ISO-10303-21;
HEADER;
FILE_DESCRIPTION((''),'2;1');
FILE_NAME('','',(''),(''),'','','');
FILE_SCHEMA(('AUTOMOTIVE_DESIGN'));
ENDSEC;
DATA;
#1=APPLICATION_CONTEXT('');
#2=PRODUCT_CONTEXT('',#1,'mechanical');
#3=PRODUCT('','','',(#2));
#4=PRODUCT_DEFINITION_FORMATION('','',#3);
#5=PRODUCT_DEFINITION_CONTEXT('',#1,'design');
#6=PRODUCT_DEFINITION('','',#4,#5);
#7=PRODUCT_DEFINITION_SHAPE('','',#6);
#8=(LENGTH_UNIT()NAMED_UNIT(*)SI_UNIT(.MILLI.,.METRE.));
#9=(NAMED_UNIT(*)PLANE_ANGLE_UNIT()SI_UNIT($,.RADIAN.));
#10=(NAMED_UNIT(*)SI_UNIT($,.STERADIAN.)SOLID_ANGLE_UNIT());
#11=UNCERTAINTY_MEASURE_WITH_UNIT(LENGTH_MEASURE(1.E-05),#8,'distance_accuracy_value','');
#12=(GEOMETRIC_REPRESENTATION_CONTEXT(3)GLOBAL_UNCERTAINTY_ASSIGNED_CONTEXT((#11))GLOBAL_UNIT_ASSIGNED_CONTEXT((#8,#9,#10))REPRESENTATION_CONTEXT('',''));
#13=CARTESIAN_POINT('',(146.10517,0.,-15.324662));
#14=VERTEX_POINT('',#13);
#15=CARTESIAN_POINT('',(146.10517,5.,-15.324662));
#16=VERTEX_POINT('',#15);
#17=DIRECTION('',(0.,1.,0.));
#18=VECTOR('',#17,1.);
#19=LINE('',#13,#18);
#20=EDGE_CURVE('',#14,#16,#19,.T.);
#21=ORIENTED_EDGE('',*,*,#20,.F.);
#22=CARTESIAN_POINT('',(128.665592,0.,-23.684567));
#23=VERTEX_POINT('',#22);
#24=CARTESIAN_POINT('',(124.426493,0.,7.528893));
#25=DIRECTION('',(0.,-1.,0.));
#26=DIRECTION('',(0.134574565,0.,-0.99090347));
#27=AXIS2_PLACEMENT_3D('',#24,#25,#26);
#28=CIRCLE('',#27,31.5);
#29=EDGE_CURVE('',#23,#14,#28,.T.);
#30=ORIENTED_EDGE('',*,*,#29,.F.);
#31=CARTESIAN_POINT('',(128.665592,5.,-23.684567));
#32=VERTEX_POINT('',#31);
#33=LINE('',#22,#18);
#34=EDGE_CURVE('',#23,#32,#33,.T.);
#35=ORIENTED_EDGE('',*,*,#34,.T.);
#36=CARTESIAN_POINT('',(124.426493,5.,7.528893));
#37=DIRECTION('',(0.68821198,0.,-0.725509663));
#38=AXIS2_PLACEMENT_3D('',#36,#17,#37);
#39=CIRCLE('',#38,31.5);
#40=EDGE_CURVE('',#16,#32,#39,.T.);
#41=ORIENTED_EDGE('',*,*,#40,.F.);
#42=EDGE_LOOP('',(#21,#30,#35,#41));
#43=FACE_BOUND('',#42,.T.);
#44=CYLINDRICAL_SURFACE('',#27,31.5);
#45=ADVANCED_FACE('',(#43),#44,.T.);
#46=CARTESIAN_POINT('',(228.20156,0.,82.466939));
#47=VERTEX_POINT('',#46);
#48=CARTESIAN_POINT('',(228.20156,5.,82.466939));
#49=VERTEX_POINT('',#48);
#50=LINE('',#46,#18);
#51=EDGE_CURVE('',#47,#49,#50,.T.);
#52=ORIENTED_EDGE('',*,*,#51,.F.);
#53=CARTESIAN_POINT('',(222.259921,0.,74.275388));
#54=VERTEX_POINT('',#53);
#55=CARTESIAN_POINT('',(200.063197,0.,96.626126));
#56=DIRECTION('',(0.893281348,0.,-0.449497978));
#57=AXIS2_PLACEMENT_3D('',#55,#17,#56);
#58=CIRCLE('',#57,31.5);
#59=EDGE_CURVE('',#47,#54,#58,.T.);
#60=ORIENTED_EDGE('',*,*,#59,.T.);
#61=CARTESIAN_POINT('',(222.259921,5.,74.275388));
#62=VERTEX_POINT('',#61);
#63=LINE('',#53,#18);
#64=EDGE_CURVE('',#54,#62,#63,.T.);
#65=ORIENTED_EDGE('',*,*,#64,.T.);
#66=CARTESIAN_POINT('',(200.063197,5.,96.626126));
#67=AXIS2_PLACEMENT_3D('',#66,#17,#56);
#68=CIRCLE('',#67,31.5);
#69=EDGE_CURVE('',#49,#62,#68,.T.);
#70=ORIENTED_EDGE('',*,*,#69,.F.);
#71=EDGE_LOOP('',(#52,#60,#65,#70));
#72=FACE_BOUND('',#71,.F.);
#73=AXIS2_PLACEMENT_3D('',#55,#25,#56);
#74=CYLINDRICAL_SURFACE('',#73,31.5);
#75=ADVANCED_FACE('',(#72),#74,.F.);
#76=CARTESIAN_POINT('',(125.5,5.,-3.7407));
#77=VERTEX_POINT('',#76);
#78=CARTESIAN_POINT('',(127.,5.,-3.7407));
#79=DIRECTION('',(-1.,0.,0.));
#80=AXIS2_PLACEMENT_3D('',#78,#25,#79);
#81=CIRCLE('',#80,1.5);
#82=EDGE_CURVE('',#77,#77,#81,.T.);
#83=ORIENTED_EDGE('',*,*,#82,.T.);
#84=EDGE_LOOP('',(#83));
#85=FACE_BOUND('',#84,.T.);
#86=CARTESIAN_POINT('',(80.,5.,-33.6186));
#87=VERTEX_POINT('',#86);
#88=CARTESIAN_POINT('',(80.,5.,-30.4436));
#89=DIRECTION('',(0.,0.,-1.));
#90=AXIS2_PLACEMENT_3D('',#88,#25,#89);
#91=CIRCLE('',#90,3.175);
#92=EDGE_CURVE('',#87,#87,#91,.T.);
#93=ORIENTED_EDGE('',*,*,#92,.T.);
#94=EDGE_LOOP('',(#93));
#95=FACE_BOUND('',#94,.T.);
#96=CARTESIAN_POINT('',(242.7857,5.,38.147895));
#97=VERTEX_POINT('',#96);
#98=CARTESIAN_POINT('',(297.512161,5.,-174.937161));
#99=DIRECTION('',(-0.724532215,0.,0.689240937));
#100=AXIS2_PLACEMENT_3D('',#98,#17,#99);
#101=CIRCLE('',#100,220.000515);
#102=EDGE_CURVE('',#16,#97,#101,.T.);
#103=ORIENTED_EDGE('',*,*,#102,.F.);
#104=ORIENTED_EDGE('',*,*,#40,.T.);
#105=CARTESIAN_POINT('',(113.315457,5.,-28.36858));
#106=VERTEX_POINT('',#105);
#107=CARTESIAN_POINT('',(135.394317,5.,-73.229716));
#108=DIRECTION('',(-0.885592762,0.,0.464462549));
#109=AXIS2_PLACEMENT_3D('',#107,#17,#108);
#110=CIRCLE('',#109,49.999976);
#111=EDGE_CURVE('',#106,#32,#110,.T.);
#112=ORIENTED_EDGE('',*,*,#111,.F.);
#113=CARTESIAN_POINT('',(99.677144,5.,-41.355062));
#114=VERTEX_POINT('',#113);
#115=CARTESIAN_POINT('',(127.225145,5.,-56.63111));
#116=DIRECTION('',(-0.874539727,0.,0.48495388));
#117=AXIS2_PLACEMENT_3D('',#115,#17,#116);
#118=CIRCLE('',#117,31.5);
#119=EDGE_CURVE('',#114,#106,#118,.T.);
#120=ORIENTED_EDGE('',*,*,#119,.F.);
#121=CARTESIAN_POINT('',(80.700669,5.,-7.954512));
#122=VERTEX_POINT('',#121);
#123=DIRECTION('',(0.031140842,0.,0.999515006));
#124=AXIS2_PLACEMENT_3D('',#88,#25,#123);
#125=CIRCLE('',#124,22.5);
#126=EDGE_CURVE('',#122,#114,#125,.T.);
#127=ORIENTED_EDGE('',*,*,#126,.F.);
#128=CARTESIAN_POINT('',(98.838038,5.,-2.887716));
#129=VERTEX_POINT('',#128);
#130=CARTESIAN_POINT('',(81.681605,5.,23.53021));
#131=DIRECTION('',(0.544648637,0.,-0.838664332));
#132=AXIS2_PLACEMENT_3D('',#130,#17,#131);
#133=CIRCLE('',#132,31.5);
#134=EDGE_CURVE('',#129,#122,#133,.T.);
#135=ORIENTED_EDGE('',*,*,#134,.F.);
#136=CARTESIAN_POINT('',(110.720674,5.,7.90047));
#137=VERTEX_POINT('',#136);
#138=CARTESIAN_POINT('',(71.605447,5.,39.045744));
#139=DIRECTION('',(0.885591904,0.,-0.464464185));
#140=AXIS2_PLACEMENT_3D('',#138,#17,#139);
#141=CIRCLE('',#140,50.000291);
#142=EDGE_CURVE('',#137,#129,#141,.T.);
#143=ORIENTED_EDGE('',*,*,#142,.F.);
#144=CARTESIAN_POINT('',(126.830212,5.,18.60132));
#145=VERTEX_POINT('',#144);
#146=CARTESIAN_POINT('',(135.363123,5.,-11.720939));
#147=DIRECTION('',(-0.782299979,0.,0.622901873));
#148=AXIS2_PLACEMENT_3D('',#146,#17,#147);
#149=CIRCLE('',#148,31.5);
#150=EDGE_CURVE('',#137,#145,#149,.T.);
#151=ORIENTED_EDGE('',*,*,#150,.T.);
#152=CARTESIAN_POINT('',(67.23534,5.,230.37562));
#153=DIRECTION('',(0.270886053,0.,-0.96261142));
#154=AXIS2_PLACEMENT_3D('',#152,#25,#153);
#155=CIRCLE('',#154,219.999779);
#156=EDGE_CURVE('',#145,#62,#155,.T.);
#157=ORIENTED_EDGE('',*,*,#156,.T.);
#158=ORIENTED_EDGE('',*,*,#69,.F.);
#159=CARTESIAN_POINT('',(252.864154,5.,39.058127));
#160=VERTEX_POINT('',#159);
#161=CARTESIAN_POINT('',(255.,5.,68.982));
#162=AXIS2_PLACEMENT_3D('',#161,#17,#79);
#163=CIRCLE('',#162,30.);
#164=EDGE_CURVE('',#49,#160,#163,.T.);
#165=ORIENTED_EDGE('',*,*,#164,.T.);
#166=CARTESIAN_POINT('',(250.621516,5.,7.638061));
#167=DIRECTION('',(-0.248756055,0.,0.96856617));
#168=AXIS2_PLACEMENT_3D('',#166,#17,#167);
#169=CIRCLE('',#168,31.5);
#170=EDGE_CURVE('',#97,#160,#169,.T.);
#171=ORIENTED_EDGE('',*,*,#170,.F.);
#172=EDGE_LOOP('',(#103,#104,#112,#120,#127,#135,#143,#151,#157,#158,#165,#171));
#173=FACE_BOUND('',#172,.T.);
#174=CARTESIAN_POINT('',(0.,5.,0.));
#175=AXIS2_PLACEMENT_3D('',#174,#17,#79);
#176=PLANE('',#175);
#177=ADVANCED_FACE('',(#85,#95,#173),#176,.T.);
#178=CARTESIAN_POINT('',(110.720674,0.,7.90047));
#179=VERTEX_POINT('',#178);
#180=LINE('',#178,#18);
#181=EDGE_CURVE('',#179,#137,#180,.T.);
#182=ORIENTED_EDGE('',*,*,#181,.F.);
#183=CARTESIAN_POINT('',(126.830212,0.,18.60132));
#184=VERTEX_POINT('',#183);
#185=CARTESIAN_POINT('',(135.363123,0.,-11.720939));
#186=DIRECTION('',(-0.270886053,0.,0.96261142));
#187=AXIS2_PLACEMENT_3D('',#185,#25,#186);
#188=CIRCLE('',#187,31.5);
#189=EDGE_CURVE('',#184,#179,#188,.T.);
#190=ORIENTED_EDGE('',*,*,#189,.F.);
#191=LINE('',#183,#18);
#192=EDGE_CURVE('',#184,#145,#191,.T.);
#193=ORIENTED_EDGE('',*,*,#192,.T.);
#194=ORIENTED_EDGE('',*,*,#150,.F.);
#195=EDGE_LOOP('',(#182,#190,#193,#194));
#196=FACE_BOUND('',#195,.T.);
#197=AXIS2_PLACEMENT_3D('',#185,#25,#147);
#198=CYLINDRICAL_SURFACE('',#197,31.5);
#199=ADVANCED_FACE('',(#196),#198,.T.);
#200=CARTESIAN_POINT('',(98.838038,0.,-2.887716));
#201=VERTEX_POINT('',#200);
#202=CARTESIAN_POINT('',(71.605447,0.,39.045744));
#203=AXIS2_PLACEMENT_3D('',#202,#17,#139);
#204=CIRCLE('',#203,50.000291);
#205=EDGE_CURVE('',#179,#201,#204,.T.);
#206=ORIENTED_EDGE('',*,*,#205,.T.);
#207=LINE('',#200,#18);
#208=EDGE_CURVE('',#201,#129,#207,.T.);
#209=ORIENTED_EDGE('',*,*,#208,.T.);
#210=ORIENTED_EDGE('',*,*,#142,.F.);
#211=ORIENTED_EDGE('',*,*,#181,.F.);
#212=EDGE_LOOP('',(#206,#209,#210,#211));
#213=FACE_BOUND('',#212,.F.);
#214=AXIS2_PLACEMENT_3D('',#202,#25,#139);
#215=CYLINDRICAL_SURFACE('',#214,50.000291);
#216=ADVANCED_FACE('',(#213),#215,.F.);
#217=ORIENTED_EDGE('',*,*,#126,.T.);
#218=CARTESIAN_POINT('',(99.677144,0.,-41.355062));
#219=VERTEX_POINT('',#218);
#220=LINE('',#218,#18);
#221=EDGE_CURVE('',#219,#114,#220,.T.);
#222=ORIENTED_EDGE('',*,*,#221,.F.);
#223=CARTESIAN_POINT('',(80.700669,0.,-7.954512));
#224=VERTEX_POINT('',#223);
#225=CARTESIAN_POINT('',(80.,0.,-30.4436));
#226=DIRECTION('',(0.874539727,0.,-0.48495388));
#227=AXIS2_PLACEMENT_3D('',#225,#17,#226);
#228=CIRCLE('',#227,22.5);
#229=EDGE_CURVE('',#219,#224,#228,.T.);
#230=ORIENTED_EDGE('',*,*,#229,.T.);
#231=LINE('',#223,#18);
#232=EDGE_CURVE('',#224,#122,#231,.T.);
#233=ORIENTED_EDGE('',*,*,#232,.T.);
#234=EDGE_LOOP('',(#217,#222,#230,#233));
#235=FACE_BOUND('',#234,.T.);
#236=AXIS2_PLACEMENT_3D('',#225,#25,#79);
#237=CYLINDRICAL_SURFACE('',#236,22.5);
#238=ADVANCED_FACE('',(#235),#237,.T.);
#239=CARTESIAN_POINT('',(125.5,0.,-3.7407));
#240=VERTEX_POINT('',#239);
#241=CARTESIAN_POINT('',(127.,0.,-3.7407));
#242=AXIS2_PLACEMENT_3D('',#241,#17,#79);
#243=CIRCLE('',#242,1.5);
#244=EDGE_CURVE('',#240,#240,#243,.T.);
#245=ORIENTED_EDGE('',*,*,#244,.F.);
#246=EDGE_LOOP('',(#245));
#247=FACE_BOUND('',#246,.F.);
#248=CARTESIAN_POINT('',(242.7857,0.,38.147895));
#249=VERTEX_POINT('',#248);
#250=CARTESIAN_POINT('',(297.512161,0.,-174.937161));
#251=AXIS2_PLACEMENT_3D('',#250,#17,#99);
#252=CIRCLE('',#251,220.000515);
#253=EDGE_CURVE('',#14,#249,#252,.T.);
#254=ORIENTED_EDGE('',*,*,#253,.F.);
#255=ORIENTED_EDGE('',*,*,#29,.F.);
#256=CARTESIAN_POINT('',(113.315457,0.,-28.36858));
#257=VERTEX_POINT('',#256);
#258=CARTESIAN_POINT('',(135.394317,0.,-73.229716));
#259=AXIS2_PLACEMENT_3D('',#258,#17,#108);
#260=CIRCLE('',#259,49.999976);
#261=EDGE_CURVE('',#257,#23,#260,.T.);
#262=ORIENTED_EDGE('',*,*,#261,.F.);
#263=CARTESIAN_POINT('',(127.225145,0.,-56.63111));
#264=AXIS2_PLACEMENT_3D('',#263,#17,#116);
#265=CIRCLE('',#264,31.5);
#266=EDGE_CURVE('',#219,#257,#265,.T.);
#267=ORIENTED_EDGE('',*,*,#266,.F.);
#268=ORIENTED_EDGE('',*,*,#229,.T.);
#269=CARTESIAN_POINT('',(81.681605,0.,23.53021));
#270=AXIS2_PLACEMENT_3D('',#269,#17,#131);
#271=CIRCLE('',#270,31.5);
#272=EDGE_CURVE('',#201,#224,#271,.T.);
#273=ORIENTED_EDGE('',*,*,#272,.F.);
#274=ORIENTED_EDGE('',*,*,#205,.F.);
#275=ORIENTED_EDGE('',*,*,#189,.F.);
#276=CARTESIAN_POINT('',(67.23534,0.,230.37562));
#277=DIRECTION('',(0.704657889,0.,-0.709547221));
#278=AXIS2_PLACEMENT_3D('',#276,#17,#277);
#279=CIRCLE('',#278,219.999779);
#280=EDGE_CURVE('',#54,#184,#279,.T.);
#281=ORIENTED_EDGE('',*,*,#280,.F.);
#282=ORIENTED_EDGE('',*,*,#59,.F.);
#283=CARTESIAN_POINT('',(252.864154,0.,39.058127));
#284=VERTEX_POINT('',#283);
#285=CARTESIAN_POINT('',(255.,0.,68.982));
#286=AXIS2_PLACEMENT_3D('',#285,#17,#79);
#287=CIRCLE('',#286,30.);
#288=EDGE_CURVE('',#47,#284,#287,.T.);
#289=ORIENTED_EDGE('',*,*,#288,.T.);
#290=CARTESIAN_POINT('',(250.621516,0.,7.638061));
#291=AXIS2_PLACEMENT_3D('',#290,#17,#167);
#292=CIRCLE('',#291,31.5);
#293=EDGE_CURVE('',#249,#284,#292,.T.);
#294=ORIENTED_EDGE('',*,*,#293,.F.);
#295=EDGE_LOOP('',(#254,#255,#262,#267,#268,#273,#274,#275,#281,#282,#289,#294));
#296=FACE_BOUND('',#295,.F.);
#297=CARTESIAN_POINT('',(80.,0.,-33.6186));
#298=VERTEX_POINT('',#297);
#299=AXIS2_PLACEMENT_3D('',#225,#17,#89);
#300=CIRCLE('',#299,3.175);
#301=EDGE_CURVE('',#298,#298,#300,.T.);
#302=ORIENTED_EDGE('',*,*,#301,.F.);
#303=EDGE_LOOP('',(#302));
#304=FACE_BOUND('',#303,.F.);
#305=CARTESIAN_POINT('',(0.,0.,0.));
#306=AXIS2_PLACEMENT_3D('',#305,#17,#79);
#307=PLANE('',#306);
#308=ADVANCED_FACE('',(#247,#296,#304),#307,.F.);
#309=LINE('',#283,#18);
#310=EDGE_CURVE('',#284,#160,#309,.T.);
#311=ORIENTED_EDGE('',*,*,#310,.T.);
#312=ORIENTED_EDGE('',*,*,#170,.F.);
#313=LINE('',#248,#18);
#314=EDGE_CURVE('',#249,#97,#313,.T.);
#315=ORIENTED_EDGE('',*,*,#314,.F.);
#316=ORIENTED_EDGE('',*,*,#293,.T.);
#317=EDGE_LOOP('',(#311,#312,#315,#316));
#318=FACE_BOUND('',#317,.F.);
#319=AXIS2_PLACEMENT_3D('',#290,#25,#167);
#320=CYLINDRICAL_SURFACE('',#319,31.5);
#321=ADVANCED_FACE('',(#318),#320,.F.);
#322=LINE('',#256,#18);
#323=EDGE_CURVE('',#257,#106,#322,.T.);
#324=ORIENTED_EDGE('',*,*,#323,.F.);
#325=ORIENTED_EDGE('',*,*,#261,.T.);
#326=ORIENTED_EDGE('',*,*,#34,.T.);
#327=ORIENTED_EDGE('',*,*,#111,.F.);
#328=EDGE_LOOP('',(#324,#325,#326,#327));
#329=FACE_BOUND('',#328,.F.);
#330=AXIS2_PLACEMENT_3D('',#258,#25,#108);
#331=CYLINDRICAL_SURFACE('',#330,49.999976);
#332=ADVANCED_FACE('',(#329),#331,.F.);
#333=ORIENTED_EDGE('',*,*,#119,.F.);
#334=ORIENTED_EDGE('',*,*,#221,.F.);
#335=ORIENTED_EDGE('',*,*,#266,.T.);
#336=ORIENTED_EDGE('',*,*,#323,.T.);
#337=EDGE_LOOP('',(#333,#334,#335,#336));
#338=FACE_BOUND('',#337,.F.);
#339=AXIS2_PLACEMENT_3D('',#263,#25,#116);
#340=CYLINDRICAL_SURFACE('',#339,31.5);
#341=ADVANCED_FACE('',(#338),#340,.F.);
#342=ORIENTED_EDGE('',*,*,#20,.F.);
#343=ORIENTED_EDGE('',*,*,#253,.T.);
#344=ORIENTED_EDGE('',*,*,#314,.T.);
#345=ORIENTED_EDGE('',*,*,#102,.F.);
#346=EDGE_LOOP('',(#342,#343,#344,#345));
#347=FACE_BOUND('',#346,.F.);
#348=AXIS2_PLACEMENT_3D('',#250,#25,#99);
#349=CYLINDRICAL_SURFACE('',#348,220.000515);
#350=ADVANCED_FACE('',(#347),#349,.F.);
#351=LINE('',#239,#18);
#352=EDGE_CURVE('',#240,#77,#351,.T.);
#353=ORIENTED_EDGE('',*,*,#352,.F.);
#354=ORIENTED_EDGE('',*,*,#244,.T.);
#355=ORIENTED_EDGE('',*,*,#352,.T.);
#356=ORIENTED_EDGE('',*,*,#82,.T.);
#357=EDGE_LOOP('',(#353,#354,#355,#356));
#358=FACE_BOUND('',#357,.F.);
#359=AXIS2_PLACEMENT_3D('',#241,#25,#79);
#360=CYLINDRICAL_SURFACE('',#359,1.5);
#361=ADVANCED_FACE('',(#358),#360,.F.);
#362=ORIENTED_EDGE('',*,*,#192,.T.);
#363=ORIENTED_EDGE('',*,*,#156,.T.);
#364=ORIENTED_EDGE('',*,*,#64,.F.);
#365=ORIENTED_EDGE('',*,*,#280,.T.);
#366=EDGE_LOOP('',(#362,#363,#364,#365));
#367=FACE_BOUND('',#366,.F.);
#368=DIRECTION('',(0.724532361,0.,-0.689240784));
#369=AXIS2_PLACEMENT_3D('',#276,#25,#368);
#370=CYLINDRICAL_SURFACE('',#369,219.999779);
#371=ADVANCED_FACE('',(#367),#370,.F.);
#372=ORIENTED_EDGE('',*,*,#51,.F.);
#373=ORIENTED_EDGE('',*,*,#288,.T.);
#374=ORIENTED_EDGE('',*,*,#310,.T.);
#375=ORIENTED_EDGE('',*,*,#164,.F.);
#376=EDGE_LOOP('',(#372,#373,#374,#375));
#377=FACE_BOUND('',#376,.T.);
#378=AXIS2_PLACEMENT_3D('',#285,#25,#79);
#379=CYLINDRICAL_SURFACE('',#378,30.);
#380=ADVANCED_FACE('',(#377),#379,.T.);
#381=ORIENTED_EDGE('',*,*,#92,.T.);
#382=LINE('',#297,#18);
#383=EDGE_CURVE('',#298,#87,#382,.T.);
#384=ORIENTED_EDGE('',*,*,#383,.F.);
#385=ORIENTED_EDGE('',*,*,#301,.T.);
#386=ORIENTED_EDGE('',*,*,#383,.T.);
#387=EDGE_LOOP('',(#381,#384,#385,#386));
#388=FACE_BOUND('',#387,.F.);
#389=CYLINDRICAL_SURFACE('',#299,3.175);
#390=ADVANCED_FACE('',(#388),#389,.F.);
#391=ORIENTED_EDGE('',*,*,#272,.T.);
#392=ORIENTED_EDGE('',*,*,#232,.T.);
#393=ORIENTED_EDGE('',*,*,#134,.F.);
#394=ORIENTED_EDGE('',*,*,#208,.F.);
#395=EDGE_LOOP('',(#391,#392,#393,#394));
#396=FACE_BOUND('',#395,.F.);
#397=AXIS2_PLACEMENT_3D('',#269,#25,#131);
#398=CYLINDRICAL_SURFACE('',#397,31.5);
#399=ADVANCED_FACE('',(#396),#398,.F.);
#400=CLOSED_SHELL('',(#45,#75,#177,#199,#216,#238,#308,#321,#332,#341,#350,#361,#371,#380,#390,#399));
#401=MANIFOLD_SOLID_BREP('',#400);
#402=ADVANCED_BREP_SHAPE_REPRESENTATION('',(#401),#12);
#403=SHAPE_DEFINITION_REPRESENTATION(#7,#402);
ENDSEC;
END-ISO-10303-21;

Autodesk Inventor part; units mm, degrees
ref_plane "YZ Plane" through (0, 0, 0) normal (1, 0, 0) x (0, 1, 0)
ref_plane "XZ Plane" through (0, 0, 0) normal (0, 1, 0) x (-1, 0, 0)
ref_plane "XY Plane" through (0, 0, 0) normal (0, 0, 1) x (1, 0, 0)
sketch "Cara" plane through (0, 0, 0) normal (0, 0, 1) x (1, 0, 0)
  line L0 (-22.1935, -24.9393) -> (-15.1747, -17.9205)
  arc A0 (-12.474, -17.8034) -> (-15.1747, -17.9205) centre (-13.7605, -19.3347) ccw
  arc A1 (-12.474, -17.8034) -> (-6.107, -21.4794) centre (1.0981, -1.6477) ccw
  arc A2 (-4.8581, -23.8768) -> (-6.107, -21.4794) centre (-6.79, -23.3592) ccw
  line L1 (-4.8581, -23.8768) -> (-7.4272, -33.4646)
  arc A3 (-9.9928, -34.8439) -> (-7.4272, -33.4646) centre (-9.359, -32.947) ccw
  arc A4 (-22.1052, -27.8509) -> (-9.9928, -34.8439) centre (1.0981, -1.6477) ccw
  arc A5 (-22.1935, -24.9393) -> (-22.1052, -27.8509) centre (-20.7793, -26.3535) ccw
  line L2 (9.6235, -33.4646) -> (7.0544, -23.8768)
  arc A6 (8.3033, -21.4794) -> (7.0544, -23.8768) centre (8.9863, -23.3592) ccw
  arc A7 (8.3033, -21.4794) -> (14.6703, -17.8034) centre (1.0981, -1.6477) ccw
  arc A8 (17.371, -17.9205) -> (14.6703, -17.8034) centre (15.9568, -19.3347) ccw
  line L3 (17.371, -17.9205) -> (24.3898, -24.9393)
  arc A9 (24.3015, -27.8509) -> (24.3898, -24.9393) centre (22.9756, -26.3535) ccw
  arc A10 (12.1891, -34.8439) -> (24.3015, -27.8509) centre (1.0981, -1.6477) ccw
  arc A11 (9.6235, -33.4646) -> (12.1891, -34.8439) centre (11.5553, -32.947) ccw
  line L4 (32.9151, -10.173) -> (23.3272, -7.604)
  arc A12 (21.8755, -5.3237) -> (23.3272, -7.604) centre (23.8449, -5.6721) ccw
  arc A13 (21.8755, -5.3237) -> (21.8755, 2.0283) centre (1.0981, -1.6477) ccw
  arc A14 (23.3272, 4.3086) -> (21.8755, 2.0283) centre (23.8449, 2.3767) ccw
  line L5 (23.3272, 4.3086) -> (32.9151, 6.8776)
  arc A15 (35.3924, 5.3454) -> (32.9151, 6.8776) centre (33.4327, 4.9458) ccw
  arc A16 (35.3924, -8.6408) -> (35.3924, 5.3454) centre (1.0981, -1.6477) ccw
  arc A17 (32.9151, -10.173) -> (35.3924, -8.6408) centre (33.4327, -8.2412) ccw
  line L6 (24.3898, 21.6439) -> (17.371, 14.6251)
  arc A18 (14.6703, 14.508) -> (17.371, 14.6251) centre (15.9568, 16.0394) ccw
  arc A19 (14.6703, 14.508) -> (8.3033, 18.184) centre (1.0981, -1.6477) ccw
  arc A20 (7.0544, 20.5814) -> (8.3033, 18.184) centre (8.9863, 20.0638) ccw
  line L7 (7.0544, 20.5814) -> (9.6235, 30.1693)
  arc A21 (12.1891, 31.5486) -> (9.6235, 30.1693) centre (11.5553, 29.6516) ccw
  arc A22 (24.3015, 24.5555) -> (12.1891, 31.5486) centre (1.0981, -1.6477) ccw
  arc A23 (24.3898, 21.6439) -> (24.3015, 24.5555) centre (22.9756, 23.0582) ccw
  line L8 (-7.4272, 30.1693) -> (-4.8581, 20.5814)
  arc A24 (-6.107, 18.184) -> (-4.8581, 20.5814) centre (-6.79, 20.0638) ccw
  arc A25 (-6.107, 18.184) -> (-12.474, 14.508) centre (1.0981, -1.6477) ccw
  arc A26 (-15.1747, 14.6251) -> (-12.474, 14.508) centre (-13.7605, 16.0394) ccw
  line L9 (-15.1747, 14.6251) -> (-22.1935, 21.6439)
  arc A27 (-22.1052, 24.5555) -> (-22.1935, 21.6439) centre (-20.7793, 23.0582) ccw
  arc A28 (-9.9928, 31.5486) -> (-22.1052, 24.5555) centre (1.0981, -1.6477) ccw
  arc A29 (-7.4272, 30.1693) -> (-9.9928, 31.5486) centre (-9.359, 29.6516) ccw
  line L10 (-30.7188, 6.8776) -> (-21.131, 4.3086)
  arc A30 (-19.6792, 2.0283) -> (-21.131, 4.3086) centre (-21.6486, 2.3767) ccw
  arc A31 (-19.6792, 2.0283) -> (-19.6792, -5.3237) centre (1.0981, -1.6477) ccw
  arc A32 (-21.131, -7.604) -> (-19.6792, -5.3237) centre (-21.6486, -5.6721) ccw
  line L11 (-21.131, -7.604) -> (-30.7188, -10.173)
  arc A33 (-33.1961, -8.6408) -> (-30.7188, -10.173) centre (-31.2365, -8.2412) ccw
  arc A34 (-33.1961, 5.3454) -> (-33.1961, -8.6408) centre (1.0981, -1.6477) ccw
  arc A35 (-30.7188, 6.8776) -> (-33.1961, 5.3454) centre (-31.2365, 4.9458) ccw
  circle A36 centre (-37.4568, -19.3542) radius 1.5875
  circle A37 centre (39.653, 16.0588) radius 1.5875
  circle A38 centre (-16.6083, 36.9072) radius 1.5875
  circle A39 centre (18.8046, -40.2026) radius 1.5875
  circle A40 centre (1.0981, -1.6477) radius 15.5
  arc A41 (13.186, 39.6183) -> (16.9444, 39.4394) centre (15.4349, 47.2957) ccw
  arc A42 (13.186, 39.6183) -> (-10.9897, 39.6183) centre (1.0981, -1.6477) ccw
  arc A43 (-15.0916, 39.5133) -> (-10.9897, 39.6183) centre (-13.2386, 47.2957) ccw
  arc A44 (-15.0916, 39.5133) -> (-19.5734, 37.455) centre (-16.0181, 35.6221) ccw
  arc A45 (-22.3261, 34.412) -> (-19.5734, 37.455) centre (-26.6841, 41.1208) ccw
  arc A46 (-22.3261, 34.412) -> (-34.8255, 21.9848) centre (1.0981, -1.6477) ccw
  arc A47 (-37.5746, 19.4158) -> (-34.8255, 21.9848) centre (-41.5089, 26.3816) ccw
  arc A48 (-39.989, 14.1986) -> (-37.5746, 19.4158) centre (-37.4054, 16.1703) ccw
  arc A49 (-40.1679, 10.4402) -> (-39.989, 14.1986) centre (-47.8453, 12.6891) ccw
  arc A50 (-40.1679, 10.4402) -> (-40.2027, -13.6161) centre (1.0981, -1.6477) ccw
  arc A51 (-40.1338, -17.8165) -> (-40.2027, -13.6161) centre (-47.8865, -15.8428) ccw
  arc A52 (-40.1338, -17.8165) -> (-38.0349, -22.3868) centre (-36.2575, -18.8034) ccw
  arc A53 (-34.8937, -25.1762) -> (-38.0349, -22.3868) centre (-41.5898, -29.5536) ccw
  arc A54 (-34.8937, -25.1762) -> (-22.5344, -37.5713) centre (1.0981, -1.6477) ccw
  arc A55 (-19.9654, -40.3204) -> (-22.5344, -37.5713) centre (-26.9311, -44.2547) ccw
  arc A56 (-14.7481, -42.7348) -> (-19.9654, -40.3204) centre (-16.7198, -40.1512) ccw
  arc A57 (-10.9897, -42.9137) -> (-14.7481, -42.7348) centre (-13.2386, -50.5911) ccw
  arc A58 (-10.9897, -42.9137) -> (13.0666, -42.9485) centre (1.0981, -1.6477) ccw
  arc A59 (17.2235, -42.8687) -> (13.0666, -42.9485) centre (15.2932, -50.6324) ccw
  arc A60 (17.2235, -42.8687) -> (21.7574, -40.7935) centre (18.1887, -38.9869) ccw
  arc A61 (24.5347, -37.6994) -> (21.7574, -40.7935) centre (28.895, -44.4067) ccw
  arc A62 (24.5347, -37.6994) -> (37.0217, -25.2802) centre (1.0981, -1.6477) ccw
  arc A63 (39.7709, -22.7112) -> (37.0217, -25.2802) centre (43.7052, -29.6769) ccw
  arc A64 (42.1093, -17.3982) -> (39.7709, -22.7112) centre (39.6017, -19.4656) ccw
  arc A65 (42.3332, -13.8408) -> (42.1093, -17.3982) centre (50.0048, -16.1093) ccw
  arc A66 (42.3332, -13.8408) -> (42.3989, 10.3207) centre (1.0981, -1.6477) ccw
  arc A67 (42.3301, 14.5211) -> (42.3989, 10.3207) centre (50.0828, 12.5474) ccw
  arc A68 (42.3301, 14.5211) -> (40.2312, 19.0914) centre (38.4538, 15.508) ccw
  arc A69 (37.09, 21.8808) -> (40.2312, 19.0914) centre (43.7861, 26.2582) ccw
  arc A70 (37.09, 21.8808) -> (24.7307, 34.2759) centre (1.0981, -1.6477) ccw
  arc A71 (22.1617, 37.0251) -> (24.7307, 34.2759) centre (29.1274, 40.9594) ccw
  arc A72 (16.9444, 39.4394) -> (22.1617, 37.0251) centre (18.9161, 36.8558) ccw
  arc A73 (-38.8583, 20.9988) -> (-42.0265, 14.1525) centre (-36.2077, 15.616) ccw
  spline S0 degree 3 poles (-40.2504, 14.5992) (-40.3671, 14.8104) (-40.4601, 15.0344) (-40.6458, 15.6766) (-40.6826, 16.1053) (-40.5958, 16.8869) (-40.4968, 17.2357) (-40.1864, 17.8912) (-39.9757, 18.1925) (-39.4148, 18.7612) (-39.0515, 19.0059) (-38.4565, 19.2528) (-38.255, 19.3143) (-38.0493, 19.3558) knots 0 0 0 0 0.118944 0.118944 0.328096 0.328096 0.504735 0.504735 0.683825 0.683825 0.89662 0.89662 1 1 1 1
  line L12 (-38.8583, 20.9988) -> (-38.0493, 19.3558)
  arc A74 (-38.8583, 20.9988) -> (-42.0265, 14.1525) centre (-36.2077, 15.616) ccw
  line L13 (-40.2504, 14.5992) -> (-42.0265, 14.1525)
  line L14 (-38.5582, 21.1573) -> (-37.5746, 19.4158)
  arc A75 (-37.5746, 19.4158) -> (-34.8255, 21.9848) centre (-41.5089, 26.3816) ccw
  line L15 (-36.4963, 23.084) -> (-34.8255, 21.9848)
  arc A76 (-38.5582, 21.1573) -> (-36.4963, 23.084) centre (-41.5089, 26.3816) ccw
  spline S1 degree 3 poles (-38.0493, 19.3558) (-37.9271, 19.3805) (-37.8093, 19.397) (-37.6564, 19.4108) (-37.6155, 19.4137) (-37.5746, 19.4158) knots 0 0 0 0 0.731153 0.731153 1 1 1 1
  line L16 (-38.5582, 21.1573) -> (-37.5746, 19.4158)
  arc A77 (-38.8583, 20.9988) -> (-38.5582, 21.1573) centre (-41.5089, 26.3816) ccw
  line L17 (-38.8583, 20.9988) -> (-38.0493, 19.3558)
  spline S2 degree 3 poles (-39.989, 14.1986) (-40.081, 14.3191) (-40.1695, 14.4526) (-40.2504, 14.5992) knots 0 0 0 0 1 1 1 1
  line L18 (-40.2504, 14.5992) -> (-42.0265, 14.1525)
  arc A78 (-41.953, 13.8212) -> (-42.0265, 14.1525) centre (-47.8453, 12.6891) ccw
  line L19 (-39.989, 14.1986) -> (-41.953, 13.8212)
  line L20 (-39.989, 14.1986) -> (-41.953, 13.8212)
  arc A79 (-42.0872, 11.0024) -> (-41.953, 13.8212) centre (-47.8453, 12.6891) ccw
  line L21 (-42.0872, 11.0024) -> (-40.1679, 10.4402)
  arc A80 (-40.1679, 10.4402) -> (-39.989, 14.1986) centre (-47.8453, 12.6891) ccw
  arc A81 (-42.0872, 11.0024) -> (-42.1236, -14.1728) centre (1.0981, -1.6477) ccw
  line L22 (-36.4963, 23.084) -> (-34.8255, 21.9848)
  arc A82 (-22.3261, 34.412) -> (-34.8255, 21.9848) centre (1.0981, -1.6477) ccw
  line L23 (-23.4156, 36.0892) -> (-22.3261, 34.412)
  arc A83 (-23.4156, 36.0892) -> (-36.4963, 23.084) centre (1.0981, -1.6477) ccw
  line L24 (-23.4156, 36.0892) -> (-22.3261, 34.412)
  arc A84 (-22.3261, 34.412) -> (-19.5734, 37.455) centre (-26.6841, 41.1208) ccw
  line L25 (-21.3511, 38.3714) -> (-19.5734, 37.455)
  arc A85 (-23.4156, 36.0892) -> (-21.3511, 38.3714) centre (-26.6841, 41.1208) ccw
  line L26 (-21.3511, 38.3714) -> (-19.5734, 37.455)
  arc A86 (-15.0916, 39.5133) -> (-19.5734, 37.455) centre (-16.0181, 35.6221) ccw
  line L27 (-14.6284, 41.4589) -> (-15.0916, 39.5133)
  arc A87 (-14.6284, 41.4589) -> (-21.3511, 38.3714) centre (-16.0181, 35.6221) ccw
  line L28 (-14.6284, 41.4589) -> (-15.0916, 39.5133)
  arc A88 (-15.0916, 39.5133) -> (-10.9897, 39.6183) centre (-13.2386, 47.2957) ccw
  line L29 (-11.5519, 41.5377) -> (-10.9897, 39.6183)
  arc A89 (-14.6284, 41.4589) -> (-11.5519, 41.5377) centre (-13.2386, 47.2957) ccw
  line L30 (-11.5519, 41.5377) -> (-10.9897, 39.6183)
  arc A90 (13.186, 39.6183) -> (-10.9897, 39.6183) centre (1.0981, -1.6477) ccw
  line L31 (13.7482, 41.5377) -> (13.186, 39.6183)
  arc A91 (13.7482, 41.5377) -> (-11.5519, 41.5377) centre (1.0981, -1.6477) ccw
  line L32 (16.9444, 39.4394) -> (16.567, 41.4035)
  arc A92 (13.7482, 41.5377) -> (16.567, 41.4035) centre (15.4349, 47.2957) ccw
  line L33 (13.7482, 41.5377) -> (13.186, 39.6183)
  arc A93 (13.186, 39.6183) -> (16.9444, 39.4394) centre (15.4349, 47.2957) ccw
  spline S3 degree 3 poles (16.9444, 39.4394) (17.0649, 39.5314) (17.1985, 39.6199) (17.3451, 39.7009) knots 0 0 0 0 1 1 1 1
  line L34 (17.3451, 39.7009) -> (16.8984, 41.4769)
  arc A94 (16.567, 41.4035) -> (16.8984, 41.4769) centre (15.4349, 47.2957) ccw
  line L35 (16.9444, 39.4394) -> (16.567, 41.4035)
  spline S4 degree 3 poles (17.3451, 39.7009) (17.5563, 39.8175) (17.7803, 39.9105) (18.4224, 40.0962) (18.8512, 40.133) (19.6327, 40.0462) (19.9815, 39.9473) (20.6371, 39.6368) (20.9383, 39.4261) (21.507, 38.8652) (21.7517, 38.502) (21.9986, 37.907) (22.0601, 37.7054) (22.1017, 37.4997) knots 0 0 0 0 0.118944 0.118944 0.328096 0.328096 0.504735 0.504735 0.683825 0.683825 0.89662 0.89662 1 1 1 1
  line L36 (23.7446, 38.3088) -> (22.1017, 37.4997)
  arc A95 (23.7446, 38.3088) -> (16.8984, 41.4769) centre (18.3618, 35.6581) ccw
  line L37 (17.3451, 39.7009) -> (16.8984, 41.4769)
  line L38 (37.09, 21.8808) -> (38.764, 22.9751)
  arc A96 (38.764, 22.9751) -> (25.8298, 35.9468) centre (1.0981, -1.6477) ccw
  line L39 (25.8298, 35.9468) -> (24.7307, 34.2759)
  arc A97 (37.09, 21.8808) -> (24.7307, 34.2759) centre (1.0981, -1.6477) ccw
  line L40 (23.9031, 38.0086) -> (22.1617, 37.0251)
  arc A98 (22.1617, 37.0251) -> (24.7307, 34.2759) centre (29.1274, 40.9594) ccw
  line L41 (25.8298, 35.9468) -> (24.7307, 34.2759)
  arc A99 (23.9031, 38.0086) -> (25.8298, 35.9468) centre (29.1274, 40.9594) ccw
  spline S5 degree 3 poles (22.1017, 37.4997) (22.1264, 37.3775) (22.1428, 37.2598) (22.1566, 37.1069) (22.1595, 37.0659) (22.1617, 37.0251) knots 0 0 0 0 0.731153 0.731153 1 1 1 1
  line L42 (23.9031, 38.0086) -> (22.1617, 37.0251)
  arc A100 (23.7446, 38.3088) -> (23.9031, 38.0086) centre (29.1274, 40.9594) ccw
  line L43 (23.7446, 38.3088) -> (22.1017, 37.4997)
  line L44 (37.09, 21.8808) -> (38.764, 22.9751)
  arc A101 (37.09, 21.8808) -> (40.2312, 19.0914) centre (43.7861, 26.2582) ccw
  line L45 (41.1199, 20.8831) -> (40.2312, 19.0914)
  arc A102 (38.764, 22.9751) -> (41.1199, 20.8831) centre (43.7861, 26.2582) ccw
  line L46 (41.1199, 20.8831) -> (40.2312, 19.0914)
  arc A103 (42.3301, 14.5211) -> (40.2312, 19.0914) centre (38.4538, 15.508) ccw
  line L47 (44.2683, 14.0277) -> (42.3301, 14.5211)
  arc A104 (44.2683, 14.0277) -> (41.1199, 20.8831) centre (38.4538, 15.508) ccw
  line L48 (44.2683, 14.0277) -> (42.3301, 14.5211)
  arc A105 (42.3301, 14.5211) -> (42.3989, 10.3207) centre (50.0828, 12.5474) ccw
  line L49 (44.3199, 10.8774) -> (42.3989, 10.3207)
  arc A106 (44.2683, 14.0277) -> (44.3199, 10.8774) centre (50.0828, 12.5474) ccw
  line L50 (44.3199, 10.8774) -> (42.3989, 10.3207)
  arc A107 (42.3332, -13.8408) -> (42.3989, 10.3207) centre (1.0981, -1.6477) ccw
  line L51 (44.2511, -14.4079) -> (42.3332, -13.8408)
  arc A108 (44.2511, -14.4079) -> (44.3199, 10.8774) centre (1.0981, -1.6477) ccw
  spline S6 degree 3 poles (42.4708, -17.939) (42.66, -18.2947) (42.7816, -18.6826) (42.8764, -19.4825) (42.8492, -19.8873) (42.6667, -20.5952) (42.5369, -20.899) (42.1389, -21.5409) (41.845, -21.8556) (41.1886, -22.3275) (40.8415, -22.494) (40.3834, -22.6216) (40.2925, -22.6427) (40.2009, -22.6599) knots 0 0 0 0 0.198107 0.198107 0.395669 0.395669 0.556952 0.556952 0.766408 0.766408 0.954091 0.954091 1 1 1 1
  line L52 (41.0245, -24.3091) -> (40.2009, -22.6599)
  arc A109 (41.0245, -24.3091) -> (44.1743, -17.5253) centre (38.3438, -18.9413) ccw
  line L53 (42.4708, -17.939) -> (44.1743, -17.5253)
  line L54 (42.1093, -17.3982) -> (44.0832, -17.076)
  arc A110 (44.2511, -14.4079) -> (44.0832, -17.076) centre (50.0048, -16.1093) ccw
  line L55 (44.2511, -14.4079) -> (42.3332, -13.8408)
  arc A111 (42.3332, -13.8408) -> (42.1093, -17.3982) centre (50.0048, -16.1093) ccw
  spline S7 degree 3 poles (42.1093, -17.3982) (42.1251, -17.4173) (42.1406, -17.4367) (42.2692, -17.6002) (42.376, -17.7609) (42.4708, -17.939) knots 0 0 0 0 0.119683 0.119683 1 1 1 1
  line L56 (42.4708, -17.939) -> (44.1743, -17.5253)
  arc A112 (44.0832, -17.076) -> (44.1743, -17.5253) centre (50.0048, -16.1093) ccw
  line L57 (42.1093, -17.3982) -> (44.0832, -17.076)
  spline S8 degree 3 poles (40.2009, -22.6599) (40.0946, -22.6799) (39.9919, -22.6936) (39.8527, -22.7062) (39.8117, -22.7091) (39.7709, -22.7112) knots 0 0 0 0 0.704713 0.704713 1 1 1 1
  line L58 (40.7545, -24.4527) -> (39.7709, -22.7112)
  arc A113 (41.0245, -24.3091) -> (40.7545, -24.4527) centre (43.7052, -29.6769) ccw
  line L59 (41.0245, -24.3091) -> (40.2009, -22.6599)
  line L60 (40.7545, -24.4527) -> (39.7709, -22.7112)
  arc A114 (39.7709, -22.7112) -> (37.0217, -25.2802) centre (43.7052, -29.6769) ccw
  line L61 (38.6926, -26.3794) -> (37.0217, -25.2802)
  arc A115 (40.7545, -24.4527) -> (38.6926, -26.3794) centre (43.7052, -29.6769) ccw
  line L62 (38.6926, -26.3794) -> (37.0217, -25.2802)
  arc A116 (24.5347, -37.6994) -> (37.0217, -25.2802) centre (1.0981, -1.6477) ccw
  line L63 (25.6248, -39.3763) -> (24.5347, -37.6994)
  arc A117 (25.6248, -39.3763) -> (38.6926, -26.3794) centre (1.0981, -1.6477) ccw
  line L64 (25.6248, -39.3763) -> (24.5347, -37.6994)
  arc A118 (24.5347, -37.6994) -> (21.7574, -40.7935) centre (28.895, -44.4067) ccw
  line L65 (23.5418, -41.6968) -> (21.7574, -40.7935)
  arc A119 (25.6248, -39.3763) -> (23.5418, -41.6968) centre (28.895, -44.4067) ccw
  line L66 (23.5418, -41.6968) -> (21.7574, -40.7935)
  arc A120 (17.2235, -42.8687) -> (21.7574, -40.7935) centre (18.1887, -38.9869) ccw
  line L67 (16.7409, -44.8096) -> (17.2235, -42.8687)
  arc A121 (16.7409, -44.8096) -> (23.5418, -41.6968) centre (18.1887, -38.9869) ccw
  line L68 (16.7409, -44.8096) -> (17.2235, -42.8687)
  arc A122 (17.2235, -42.8687) -> (13.0666, -42.9485) centre (15.2932, -50.6324) ccw
  line L69 (13.6232, -44.8695) -> (13.0666, -42.9485)
  arc A123 (16.7409, -44.8096) -> (13.6232, -44.8695) centre (15.2932, -50.6324) ccw
  arc A124 (-10.9897, -42.9137) -> (13.0666, -42.9485) centre (1.0981, -1.6477) ccw
  line L70 (13.6232, -44.8695) -> (13.0666, -42.9485)
  arc A125 (-10.9897, -42.9137) -> (13.0666, -42.9485) centre (1.0981, -1.6477) ccw
  line L71 (-11.5519, -44.8331) -> (-10.9897, -42.9137)
  arc A126 (-11.5519, -44.8331) -> (13.6232, -44.8695) centre (1.0981, -1.6477) ccw
  line L72 (-14.7481, -42.7348) -> (-14.3707, -44.6989)
  arc A127 (-11.5519, -44.8331) -> (-14.3707, -44.6989) centre (-13.2386, -50.5911) ccw
  line L73 (-11.5519, -44.8331) -> (-10.9897, -42.9137)
  arc A128 (-10.9897, -42.9137) -> (-14.7481, -42.7348) centre (-13.2386, -50.5911) ccw
  spline S9 degree 3 poles (-15.1488, -42.9963) (-15.36, -43.1129) (-15.584, -43.2059) (-16.2261, -43.3916) (-16.6549, -43.4284) (-17.4365, -43.3416) (-17.7852, -43.2427) (-18.4408, -42.9322) (-18.742, -42.7215) (-19.3107, -42.1606) (-19.5554, -41.7973) (-19.8023, -41.2024) (-19.8638, -41.0008) (-19.9054, -40.7951) knots 0 0 0 0 0.118944 0.118944 0.328096 0.328096 0.504735 0.504735 0.683825 0.683825 0.89662 0.89662 1 1 1 1
  line L74 (-21.5483, -41.6041) -> (-19.9054, -40.7951)
  arc A129 (-21.5483, -41.6041) -> (-14.7021, -44.7723) centre (-16.1656, -38.9535) ccw
  line L75 (-15.1488, -42.9963) -> (-14.7021, -44.7723)
  spline S10 degree 3 poles (-14.7481, -42.7348) (-14.8686, -42.8268) (-15.0022, -42.9153) (-15.1488, -42.9963) knots 0 0 0 0 1 1 1 1
  line L76 (-15.1488, -42.9963) -> (-14.7021, -44.7723)
  arc A130 (-14.3707, -44.6989) -> (-14.7021, -44.7723) centre (-13.2386, -50.5911) ccw
  line L77 (-14.7481, -42.7348) -> (-14.3707, -44.6989)
  spline S11 degree 3 poles (-19.9054, -40.7951) (-19.9301, -40.6729) (-19.9466, -40.5552) (-19.9604, -40.4023) (-19.9633, -40.3613) (-19.9654, -40.3204) knots 0 0 0 0 0.731153 0.731153 1 1 1 1
  line L78 (-21.7068, -41.304) -> (-19.9654, -40.3204)
  arc A131 (-21.5483, -41.6041) -> (-21.7068, -41.304) centre (-26.9311, -44.2547) ccw
  line L79 (-21.5483, -41.6041) -> (-19.9054, -40.7951)
  circle A132 centre (-16.7198, -40.1512) radius 3.25
  circle A133 centre (-16.7198, -40.1512) radius 1.5875
  circle A134 centre (39.6017, -19.4656) radius 3.25
  circle A135 centre (39.6017, -19.4656) radius 1.5875
  circle A136 centre (18.9161, 36.8558) radius 3.25
  circle A137 centre (18.9161, 36.8558) radius 1.5875
  circle A138 centre (-37.4054, 16.1703) radius 3.25
  circle A139 centre (-37.4054, 16.1703) radius 1.5875
  line L80 (-42.072, -17.3231) -> (-40.1338, -17.8165)
  arc A140 (-40.1338, -17.8165) -> (-40.2027, -13.6161) centre (-47.8865, -15.8428) ccw
  line L81 (-42.1236, -14.1728) -> (-40.2027, -13.6161)
  arc A141 (-42.072, -17.3231) -> (-42.1236, -14.1728) centre (-47.8865, -15.8428) ccw
  line L82 (-38.9237, -24.1785) -> (-38.0349, -22.3868)
  arc A142 (-40.1338, -17.8165) -> (-38.0349, -22.3868) centre (-36.2575, -18.8034) ccw
  line L83 (-42.072, -17.3231) -> (-40.1338, -17.8165)
  arc A143 (-42.072, -17.3231) -> (-38.9237, -24.1785) centre (-36.2575, -18.8034) ccw
  line L84 (-36.5677, -26.2705) -> (-34.8937, -25.1762)
  arc A144 (-34.8937, -25.1762) -> (-38.0349, -22.3868) centre (-41.5898, -29.5536) ccw
  line L85 (-38.9237, -24.1785) -> (-38.0349, -22.3868)
  arc A145 (-36.5677, -26.2705) -> (-38.9237, -24.1785) centre (-41.5898, -29.5536) ccw
  line L86 (-23.6336, -39.2421) -> (-22.5344, -37.5713)
  arc A146 (-34.8937, -25.1762) -> (-22.5344, -37.5713) centre (1.0981, -1.6477) ccw
  line L87 (-36.5677, -26.2705) -> (-34.8937, -25.1762)
  arc A147 (-36.5677, -26.2705) -> (-23.6336, -39.2421) centre (1.0981, -1.6477) ccw
  line L88 (-21.7068, -41.304) -> (-19.9654, -40.3204)
  arc A148 (-19.9654, -40.3204) -> (-22.5344, -37.5713) centre (-26.9311, -44.2547) ccw
  line L89 (-23.6336, -39.2421) -> (-22.5344, -37.5713)
  arc A149 (-21.7068, -41.304) -> (-23.6336, -39.2421) centre (-26.9311, -44.2547) ccw
  point P0 (1.3022, -1.7009)
  dimension "d1" = 30
  dimension "d2" = 40
  dimension "d3" = 70
  dimension "d4" = 90
  dimension "d5" = 65
  dimension "d6" = 95
  dimension "d7" = 100
  dimension "d8" = 72
  dimension "d9" = 17
  dimension "d10" = 110
  dimension "d11" = 4
sketch "Sketch1" plane through (0, 0, 0) normal (0, 1, 0) x (-1, 0, 0)
  line L0 (124.1031, 264.7872) -> (124.1031, -182.5054) construction
  line L1 (124.1031, -182.5054) -> (-344.0995, -182.5054) construction
  line L2 (-344.0995, -182.5054) -> (-344.0995, 264.7872) construction
  line L3 (-344.0995, 264.7872) -> (124.1031, 264.7872) construction
  circle A0 centre (0, 0) radius 50
  circle A1 centre (0, 0) radius 17.5
  line L4 (0, 0) -> (-80, -30.4436)
  line L5 (0, 0) -> (0, -17.5)
  line L6 (0, 0) -> (-17.5, 0)
  circle A2 centre (-80, -30.4436) radius 10
  line L7 (0, 0) -> (12.3744, -12.3744)
  line L8 (-80, -30.4436) -> (-80, -40.4436)
  line L9 (-80, -30.4436) -> (-72.9289, -37.5146)
  arc A3 (-80, -40.4436) -> (12.3744, -12.3744) centre (-63.3574, 70.821) ccw
  line L10 (-80, -30.4436) -> (-80, -20.4436)
  line L11 (0, 0) -> (-12.3744, 12.3744)
  arc A4 (-80, -20.4436) -> (-12.3744, 12.3744) centre (-83.4964, 72.8458) ccw
  circle A5 centre (0, 0) radius 7.6
  circle A6 centre (7.5887, 0.4145) radius 1.5
  circle A7 centre (-0.4145, 7.5887) radius 1.5
  circle A8 centre (-7.5887, -0.4145) radius 1.5
  circle A9 centre (0.4145, -7.5887) radius 1.5
  line L12 (-80, -30.4436) -> (-255, 68.982)
  circle A10 centre (-127, -3.7407) radius 10
  arc A11 (-86.3218, 30.5363) -> (-118.3053, -8.6806) centre (-58.582, -24.7376) ccw
  line L13 (-118.3053, -8.6806) -> (-135.6947, -8.6806)
  arc A12 (-119.9959, 36.9754) -> (-135.6947, -8.6806) centre (-99.2388, 4.3111) ccw
  line L14 (0, 0) -> (0, 50)
  line L15 (0, 0) -> (-40.4145, 70)
  circle A13 centre (-40.4145, 70) radius 2
  circle A14 centre (-40.4145, 70) radius 15
  line L16 (-32.9145, 57.0096) -> (-86.3218, 30.5363)
  line L17 (-119.9959, 36.9754) -> (-48.488, 82.642)
  circle A15 centre (-127, -3.7407) radius 1.5
  circle A16 centre (-80, -30.4436) radius 22.5
  circle A17 centre (-127, -3.7407) radius 20
  circle A18 centre (-255, 68.982) radius 30
  line L18 (-80, -30.4436) -> (-91.1147, -50.0066)
  arc A19 (-80, -30.4436) -> (-78.0459, -25.9962) centre (-100.6021, -18.7386) ccw
  line L19 (-80, -30.4436) -> (-68.8853, -10.8805)
  line L20 (-68.8853, -10.8805) -> (-226.6323, 78.7428)
  line L21 (-91.1147, -50.0066) -> (-248.8617, 39.6167)
  line L22 (-127, -3.7407) -> (-115.8853, 15.8224)
  arc A20 (-115.8853, 15.8224) -> (-68.8853, -10.8805) centre (-71.6057, 39.0455) ccw
  arc A21 (-226.6323, 78.7428) -> (-115.8853, 15.8224) centre (-67.2352, 230.3758) ccw
  line L23 (-127, -3.7407) -> (-138.1147, -23.3038)
  arc A22 (-91.1147, -50.0066) -> (-138.1147, -23.3038) centre (-135.3943, -73.2297) ccw
  arc A23 (-138.1147, -23.3038) -> (-248.8617, 39.6167) centre (-297.5118, -174.9367) ccw
  arc A24 (-226.6323, 78.7428) -> (-115.8853, 15.8224) centre (-67.2352, 230.3758) ccw
  point P0 (0, 25)
  point P1 (-86.1365, -8.7965)
  point P2 (-101.7366, -36.2546)
  point P3 (-136.9885, -4.2197)
  point P4 (-117.0311, -4.5286)
  dimension "d44" = 100
  dimension "d68" = 15.2
  dimension "d55" = 35
  dimension "d56" = 80
  dimension "d65" = 20
  dimension "d66" = 45
  dimension "d67" = 45
  dimension "d69" = 3
  dimension "d72" = 360
  dimension "d91" = 20
  dimension "d92" = 47
  dimension "d103" = 30
  dimension "d107" = 70
  dimension "d108" = 40
  dimension "d109" = 4
  dimension "d110" = 30
  dimension "d114" = 3
  dimension "d124" = 45
  dimension "d125" = 40
  dimension "d126" = 60
  dimension "d127" = 90
  dimension "d128" = 90
  dimension "d129" = 175
  dimension "d130" = 50
  dimension "d131" = 220
  dimension "d132" = 90
  dimension "d133" = 50
  dimension "d134" = 220
extrude "Extrusion4" add sketch "Sketch1" along normal blind 5 contours A16 L18 A2 A3 | A3 A2 L4 A16 | L4 A2 L19 A4 A16 | L8 L9 A2 | A2 L18 L8 | A22 A16 L12 A2 L18 | A16 A22 | A4 L19 A16 | A2 L9 L4 | L4 L19 A2 | A2 L12 L18 | L12 A2 L10 | L10 A2 L19 | A22 A17 L12 A16 | A23 A18 L12 A17 L23 | L23 A17 A22 | L19 A2 A4 | A4 A2 L12 A16 A20 L19 | A20 A16 | L12 A17 A20 A16 | A22 A17 L23 A10 L12 | A18 | A17 L12 A12 A10 L23 | L12 A10 A11 A17 | A21 A12 A17 L12 A18 | A17 A12 L12 | L23 L13 A10 | A10 L13 L23 | A11 A10 L22 A17 A20 | A20 A17 L22 | L22 A17 A12 A21 | L13 L23 A15 L12 | A11 A10 | L12 A15 L22 A10 A11 | A12 A17 L22 A10 L12 | L12 A10 A12 | A12 A10 L12 A15 L23 L13 | A10 A12 | A10 L22 A15 L12
hole "Hole2" at (80, 0, -30.4436) direction (0, 1, 0) diameter 6.35 end through all
fillet "Fillet1" radius 31.5 6 edges at (115.8853, 2.5, 15.8224) (86.1365, 2.5, -8.7965) (138.1147, 2.5, -23.3038) (101.7366, 2.5, -36.2546) (226.6323, 2.5, 78.7428) (248.8617, 2.5, 39.6167)
properties part number "Link3V1"
